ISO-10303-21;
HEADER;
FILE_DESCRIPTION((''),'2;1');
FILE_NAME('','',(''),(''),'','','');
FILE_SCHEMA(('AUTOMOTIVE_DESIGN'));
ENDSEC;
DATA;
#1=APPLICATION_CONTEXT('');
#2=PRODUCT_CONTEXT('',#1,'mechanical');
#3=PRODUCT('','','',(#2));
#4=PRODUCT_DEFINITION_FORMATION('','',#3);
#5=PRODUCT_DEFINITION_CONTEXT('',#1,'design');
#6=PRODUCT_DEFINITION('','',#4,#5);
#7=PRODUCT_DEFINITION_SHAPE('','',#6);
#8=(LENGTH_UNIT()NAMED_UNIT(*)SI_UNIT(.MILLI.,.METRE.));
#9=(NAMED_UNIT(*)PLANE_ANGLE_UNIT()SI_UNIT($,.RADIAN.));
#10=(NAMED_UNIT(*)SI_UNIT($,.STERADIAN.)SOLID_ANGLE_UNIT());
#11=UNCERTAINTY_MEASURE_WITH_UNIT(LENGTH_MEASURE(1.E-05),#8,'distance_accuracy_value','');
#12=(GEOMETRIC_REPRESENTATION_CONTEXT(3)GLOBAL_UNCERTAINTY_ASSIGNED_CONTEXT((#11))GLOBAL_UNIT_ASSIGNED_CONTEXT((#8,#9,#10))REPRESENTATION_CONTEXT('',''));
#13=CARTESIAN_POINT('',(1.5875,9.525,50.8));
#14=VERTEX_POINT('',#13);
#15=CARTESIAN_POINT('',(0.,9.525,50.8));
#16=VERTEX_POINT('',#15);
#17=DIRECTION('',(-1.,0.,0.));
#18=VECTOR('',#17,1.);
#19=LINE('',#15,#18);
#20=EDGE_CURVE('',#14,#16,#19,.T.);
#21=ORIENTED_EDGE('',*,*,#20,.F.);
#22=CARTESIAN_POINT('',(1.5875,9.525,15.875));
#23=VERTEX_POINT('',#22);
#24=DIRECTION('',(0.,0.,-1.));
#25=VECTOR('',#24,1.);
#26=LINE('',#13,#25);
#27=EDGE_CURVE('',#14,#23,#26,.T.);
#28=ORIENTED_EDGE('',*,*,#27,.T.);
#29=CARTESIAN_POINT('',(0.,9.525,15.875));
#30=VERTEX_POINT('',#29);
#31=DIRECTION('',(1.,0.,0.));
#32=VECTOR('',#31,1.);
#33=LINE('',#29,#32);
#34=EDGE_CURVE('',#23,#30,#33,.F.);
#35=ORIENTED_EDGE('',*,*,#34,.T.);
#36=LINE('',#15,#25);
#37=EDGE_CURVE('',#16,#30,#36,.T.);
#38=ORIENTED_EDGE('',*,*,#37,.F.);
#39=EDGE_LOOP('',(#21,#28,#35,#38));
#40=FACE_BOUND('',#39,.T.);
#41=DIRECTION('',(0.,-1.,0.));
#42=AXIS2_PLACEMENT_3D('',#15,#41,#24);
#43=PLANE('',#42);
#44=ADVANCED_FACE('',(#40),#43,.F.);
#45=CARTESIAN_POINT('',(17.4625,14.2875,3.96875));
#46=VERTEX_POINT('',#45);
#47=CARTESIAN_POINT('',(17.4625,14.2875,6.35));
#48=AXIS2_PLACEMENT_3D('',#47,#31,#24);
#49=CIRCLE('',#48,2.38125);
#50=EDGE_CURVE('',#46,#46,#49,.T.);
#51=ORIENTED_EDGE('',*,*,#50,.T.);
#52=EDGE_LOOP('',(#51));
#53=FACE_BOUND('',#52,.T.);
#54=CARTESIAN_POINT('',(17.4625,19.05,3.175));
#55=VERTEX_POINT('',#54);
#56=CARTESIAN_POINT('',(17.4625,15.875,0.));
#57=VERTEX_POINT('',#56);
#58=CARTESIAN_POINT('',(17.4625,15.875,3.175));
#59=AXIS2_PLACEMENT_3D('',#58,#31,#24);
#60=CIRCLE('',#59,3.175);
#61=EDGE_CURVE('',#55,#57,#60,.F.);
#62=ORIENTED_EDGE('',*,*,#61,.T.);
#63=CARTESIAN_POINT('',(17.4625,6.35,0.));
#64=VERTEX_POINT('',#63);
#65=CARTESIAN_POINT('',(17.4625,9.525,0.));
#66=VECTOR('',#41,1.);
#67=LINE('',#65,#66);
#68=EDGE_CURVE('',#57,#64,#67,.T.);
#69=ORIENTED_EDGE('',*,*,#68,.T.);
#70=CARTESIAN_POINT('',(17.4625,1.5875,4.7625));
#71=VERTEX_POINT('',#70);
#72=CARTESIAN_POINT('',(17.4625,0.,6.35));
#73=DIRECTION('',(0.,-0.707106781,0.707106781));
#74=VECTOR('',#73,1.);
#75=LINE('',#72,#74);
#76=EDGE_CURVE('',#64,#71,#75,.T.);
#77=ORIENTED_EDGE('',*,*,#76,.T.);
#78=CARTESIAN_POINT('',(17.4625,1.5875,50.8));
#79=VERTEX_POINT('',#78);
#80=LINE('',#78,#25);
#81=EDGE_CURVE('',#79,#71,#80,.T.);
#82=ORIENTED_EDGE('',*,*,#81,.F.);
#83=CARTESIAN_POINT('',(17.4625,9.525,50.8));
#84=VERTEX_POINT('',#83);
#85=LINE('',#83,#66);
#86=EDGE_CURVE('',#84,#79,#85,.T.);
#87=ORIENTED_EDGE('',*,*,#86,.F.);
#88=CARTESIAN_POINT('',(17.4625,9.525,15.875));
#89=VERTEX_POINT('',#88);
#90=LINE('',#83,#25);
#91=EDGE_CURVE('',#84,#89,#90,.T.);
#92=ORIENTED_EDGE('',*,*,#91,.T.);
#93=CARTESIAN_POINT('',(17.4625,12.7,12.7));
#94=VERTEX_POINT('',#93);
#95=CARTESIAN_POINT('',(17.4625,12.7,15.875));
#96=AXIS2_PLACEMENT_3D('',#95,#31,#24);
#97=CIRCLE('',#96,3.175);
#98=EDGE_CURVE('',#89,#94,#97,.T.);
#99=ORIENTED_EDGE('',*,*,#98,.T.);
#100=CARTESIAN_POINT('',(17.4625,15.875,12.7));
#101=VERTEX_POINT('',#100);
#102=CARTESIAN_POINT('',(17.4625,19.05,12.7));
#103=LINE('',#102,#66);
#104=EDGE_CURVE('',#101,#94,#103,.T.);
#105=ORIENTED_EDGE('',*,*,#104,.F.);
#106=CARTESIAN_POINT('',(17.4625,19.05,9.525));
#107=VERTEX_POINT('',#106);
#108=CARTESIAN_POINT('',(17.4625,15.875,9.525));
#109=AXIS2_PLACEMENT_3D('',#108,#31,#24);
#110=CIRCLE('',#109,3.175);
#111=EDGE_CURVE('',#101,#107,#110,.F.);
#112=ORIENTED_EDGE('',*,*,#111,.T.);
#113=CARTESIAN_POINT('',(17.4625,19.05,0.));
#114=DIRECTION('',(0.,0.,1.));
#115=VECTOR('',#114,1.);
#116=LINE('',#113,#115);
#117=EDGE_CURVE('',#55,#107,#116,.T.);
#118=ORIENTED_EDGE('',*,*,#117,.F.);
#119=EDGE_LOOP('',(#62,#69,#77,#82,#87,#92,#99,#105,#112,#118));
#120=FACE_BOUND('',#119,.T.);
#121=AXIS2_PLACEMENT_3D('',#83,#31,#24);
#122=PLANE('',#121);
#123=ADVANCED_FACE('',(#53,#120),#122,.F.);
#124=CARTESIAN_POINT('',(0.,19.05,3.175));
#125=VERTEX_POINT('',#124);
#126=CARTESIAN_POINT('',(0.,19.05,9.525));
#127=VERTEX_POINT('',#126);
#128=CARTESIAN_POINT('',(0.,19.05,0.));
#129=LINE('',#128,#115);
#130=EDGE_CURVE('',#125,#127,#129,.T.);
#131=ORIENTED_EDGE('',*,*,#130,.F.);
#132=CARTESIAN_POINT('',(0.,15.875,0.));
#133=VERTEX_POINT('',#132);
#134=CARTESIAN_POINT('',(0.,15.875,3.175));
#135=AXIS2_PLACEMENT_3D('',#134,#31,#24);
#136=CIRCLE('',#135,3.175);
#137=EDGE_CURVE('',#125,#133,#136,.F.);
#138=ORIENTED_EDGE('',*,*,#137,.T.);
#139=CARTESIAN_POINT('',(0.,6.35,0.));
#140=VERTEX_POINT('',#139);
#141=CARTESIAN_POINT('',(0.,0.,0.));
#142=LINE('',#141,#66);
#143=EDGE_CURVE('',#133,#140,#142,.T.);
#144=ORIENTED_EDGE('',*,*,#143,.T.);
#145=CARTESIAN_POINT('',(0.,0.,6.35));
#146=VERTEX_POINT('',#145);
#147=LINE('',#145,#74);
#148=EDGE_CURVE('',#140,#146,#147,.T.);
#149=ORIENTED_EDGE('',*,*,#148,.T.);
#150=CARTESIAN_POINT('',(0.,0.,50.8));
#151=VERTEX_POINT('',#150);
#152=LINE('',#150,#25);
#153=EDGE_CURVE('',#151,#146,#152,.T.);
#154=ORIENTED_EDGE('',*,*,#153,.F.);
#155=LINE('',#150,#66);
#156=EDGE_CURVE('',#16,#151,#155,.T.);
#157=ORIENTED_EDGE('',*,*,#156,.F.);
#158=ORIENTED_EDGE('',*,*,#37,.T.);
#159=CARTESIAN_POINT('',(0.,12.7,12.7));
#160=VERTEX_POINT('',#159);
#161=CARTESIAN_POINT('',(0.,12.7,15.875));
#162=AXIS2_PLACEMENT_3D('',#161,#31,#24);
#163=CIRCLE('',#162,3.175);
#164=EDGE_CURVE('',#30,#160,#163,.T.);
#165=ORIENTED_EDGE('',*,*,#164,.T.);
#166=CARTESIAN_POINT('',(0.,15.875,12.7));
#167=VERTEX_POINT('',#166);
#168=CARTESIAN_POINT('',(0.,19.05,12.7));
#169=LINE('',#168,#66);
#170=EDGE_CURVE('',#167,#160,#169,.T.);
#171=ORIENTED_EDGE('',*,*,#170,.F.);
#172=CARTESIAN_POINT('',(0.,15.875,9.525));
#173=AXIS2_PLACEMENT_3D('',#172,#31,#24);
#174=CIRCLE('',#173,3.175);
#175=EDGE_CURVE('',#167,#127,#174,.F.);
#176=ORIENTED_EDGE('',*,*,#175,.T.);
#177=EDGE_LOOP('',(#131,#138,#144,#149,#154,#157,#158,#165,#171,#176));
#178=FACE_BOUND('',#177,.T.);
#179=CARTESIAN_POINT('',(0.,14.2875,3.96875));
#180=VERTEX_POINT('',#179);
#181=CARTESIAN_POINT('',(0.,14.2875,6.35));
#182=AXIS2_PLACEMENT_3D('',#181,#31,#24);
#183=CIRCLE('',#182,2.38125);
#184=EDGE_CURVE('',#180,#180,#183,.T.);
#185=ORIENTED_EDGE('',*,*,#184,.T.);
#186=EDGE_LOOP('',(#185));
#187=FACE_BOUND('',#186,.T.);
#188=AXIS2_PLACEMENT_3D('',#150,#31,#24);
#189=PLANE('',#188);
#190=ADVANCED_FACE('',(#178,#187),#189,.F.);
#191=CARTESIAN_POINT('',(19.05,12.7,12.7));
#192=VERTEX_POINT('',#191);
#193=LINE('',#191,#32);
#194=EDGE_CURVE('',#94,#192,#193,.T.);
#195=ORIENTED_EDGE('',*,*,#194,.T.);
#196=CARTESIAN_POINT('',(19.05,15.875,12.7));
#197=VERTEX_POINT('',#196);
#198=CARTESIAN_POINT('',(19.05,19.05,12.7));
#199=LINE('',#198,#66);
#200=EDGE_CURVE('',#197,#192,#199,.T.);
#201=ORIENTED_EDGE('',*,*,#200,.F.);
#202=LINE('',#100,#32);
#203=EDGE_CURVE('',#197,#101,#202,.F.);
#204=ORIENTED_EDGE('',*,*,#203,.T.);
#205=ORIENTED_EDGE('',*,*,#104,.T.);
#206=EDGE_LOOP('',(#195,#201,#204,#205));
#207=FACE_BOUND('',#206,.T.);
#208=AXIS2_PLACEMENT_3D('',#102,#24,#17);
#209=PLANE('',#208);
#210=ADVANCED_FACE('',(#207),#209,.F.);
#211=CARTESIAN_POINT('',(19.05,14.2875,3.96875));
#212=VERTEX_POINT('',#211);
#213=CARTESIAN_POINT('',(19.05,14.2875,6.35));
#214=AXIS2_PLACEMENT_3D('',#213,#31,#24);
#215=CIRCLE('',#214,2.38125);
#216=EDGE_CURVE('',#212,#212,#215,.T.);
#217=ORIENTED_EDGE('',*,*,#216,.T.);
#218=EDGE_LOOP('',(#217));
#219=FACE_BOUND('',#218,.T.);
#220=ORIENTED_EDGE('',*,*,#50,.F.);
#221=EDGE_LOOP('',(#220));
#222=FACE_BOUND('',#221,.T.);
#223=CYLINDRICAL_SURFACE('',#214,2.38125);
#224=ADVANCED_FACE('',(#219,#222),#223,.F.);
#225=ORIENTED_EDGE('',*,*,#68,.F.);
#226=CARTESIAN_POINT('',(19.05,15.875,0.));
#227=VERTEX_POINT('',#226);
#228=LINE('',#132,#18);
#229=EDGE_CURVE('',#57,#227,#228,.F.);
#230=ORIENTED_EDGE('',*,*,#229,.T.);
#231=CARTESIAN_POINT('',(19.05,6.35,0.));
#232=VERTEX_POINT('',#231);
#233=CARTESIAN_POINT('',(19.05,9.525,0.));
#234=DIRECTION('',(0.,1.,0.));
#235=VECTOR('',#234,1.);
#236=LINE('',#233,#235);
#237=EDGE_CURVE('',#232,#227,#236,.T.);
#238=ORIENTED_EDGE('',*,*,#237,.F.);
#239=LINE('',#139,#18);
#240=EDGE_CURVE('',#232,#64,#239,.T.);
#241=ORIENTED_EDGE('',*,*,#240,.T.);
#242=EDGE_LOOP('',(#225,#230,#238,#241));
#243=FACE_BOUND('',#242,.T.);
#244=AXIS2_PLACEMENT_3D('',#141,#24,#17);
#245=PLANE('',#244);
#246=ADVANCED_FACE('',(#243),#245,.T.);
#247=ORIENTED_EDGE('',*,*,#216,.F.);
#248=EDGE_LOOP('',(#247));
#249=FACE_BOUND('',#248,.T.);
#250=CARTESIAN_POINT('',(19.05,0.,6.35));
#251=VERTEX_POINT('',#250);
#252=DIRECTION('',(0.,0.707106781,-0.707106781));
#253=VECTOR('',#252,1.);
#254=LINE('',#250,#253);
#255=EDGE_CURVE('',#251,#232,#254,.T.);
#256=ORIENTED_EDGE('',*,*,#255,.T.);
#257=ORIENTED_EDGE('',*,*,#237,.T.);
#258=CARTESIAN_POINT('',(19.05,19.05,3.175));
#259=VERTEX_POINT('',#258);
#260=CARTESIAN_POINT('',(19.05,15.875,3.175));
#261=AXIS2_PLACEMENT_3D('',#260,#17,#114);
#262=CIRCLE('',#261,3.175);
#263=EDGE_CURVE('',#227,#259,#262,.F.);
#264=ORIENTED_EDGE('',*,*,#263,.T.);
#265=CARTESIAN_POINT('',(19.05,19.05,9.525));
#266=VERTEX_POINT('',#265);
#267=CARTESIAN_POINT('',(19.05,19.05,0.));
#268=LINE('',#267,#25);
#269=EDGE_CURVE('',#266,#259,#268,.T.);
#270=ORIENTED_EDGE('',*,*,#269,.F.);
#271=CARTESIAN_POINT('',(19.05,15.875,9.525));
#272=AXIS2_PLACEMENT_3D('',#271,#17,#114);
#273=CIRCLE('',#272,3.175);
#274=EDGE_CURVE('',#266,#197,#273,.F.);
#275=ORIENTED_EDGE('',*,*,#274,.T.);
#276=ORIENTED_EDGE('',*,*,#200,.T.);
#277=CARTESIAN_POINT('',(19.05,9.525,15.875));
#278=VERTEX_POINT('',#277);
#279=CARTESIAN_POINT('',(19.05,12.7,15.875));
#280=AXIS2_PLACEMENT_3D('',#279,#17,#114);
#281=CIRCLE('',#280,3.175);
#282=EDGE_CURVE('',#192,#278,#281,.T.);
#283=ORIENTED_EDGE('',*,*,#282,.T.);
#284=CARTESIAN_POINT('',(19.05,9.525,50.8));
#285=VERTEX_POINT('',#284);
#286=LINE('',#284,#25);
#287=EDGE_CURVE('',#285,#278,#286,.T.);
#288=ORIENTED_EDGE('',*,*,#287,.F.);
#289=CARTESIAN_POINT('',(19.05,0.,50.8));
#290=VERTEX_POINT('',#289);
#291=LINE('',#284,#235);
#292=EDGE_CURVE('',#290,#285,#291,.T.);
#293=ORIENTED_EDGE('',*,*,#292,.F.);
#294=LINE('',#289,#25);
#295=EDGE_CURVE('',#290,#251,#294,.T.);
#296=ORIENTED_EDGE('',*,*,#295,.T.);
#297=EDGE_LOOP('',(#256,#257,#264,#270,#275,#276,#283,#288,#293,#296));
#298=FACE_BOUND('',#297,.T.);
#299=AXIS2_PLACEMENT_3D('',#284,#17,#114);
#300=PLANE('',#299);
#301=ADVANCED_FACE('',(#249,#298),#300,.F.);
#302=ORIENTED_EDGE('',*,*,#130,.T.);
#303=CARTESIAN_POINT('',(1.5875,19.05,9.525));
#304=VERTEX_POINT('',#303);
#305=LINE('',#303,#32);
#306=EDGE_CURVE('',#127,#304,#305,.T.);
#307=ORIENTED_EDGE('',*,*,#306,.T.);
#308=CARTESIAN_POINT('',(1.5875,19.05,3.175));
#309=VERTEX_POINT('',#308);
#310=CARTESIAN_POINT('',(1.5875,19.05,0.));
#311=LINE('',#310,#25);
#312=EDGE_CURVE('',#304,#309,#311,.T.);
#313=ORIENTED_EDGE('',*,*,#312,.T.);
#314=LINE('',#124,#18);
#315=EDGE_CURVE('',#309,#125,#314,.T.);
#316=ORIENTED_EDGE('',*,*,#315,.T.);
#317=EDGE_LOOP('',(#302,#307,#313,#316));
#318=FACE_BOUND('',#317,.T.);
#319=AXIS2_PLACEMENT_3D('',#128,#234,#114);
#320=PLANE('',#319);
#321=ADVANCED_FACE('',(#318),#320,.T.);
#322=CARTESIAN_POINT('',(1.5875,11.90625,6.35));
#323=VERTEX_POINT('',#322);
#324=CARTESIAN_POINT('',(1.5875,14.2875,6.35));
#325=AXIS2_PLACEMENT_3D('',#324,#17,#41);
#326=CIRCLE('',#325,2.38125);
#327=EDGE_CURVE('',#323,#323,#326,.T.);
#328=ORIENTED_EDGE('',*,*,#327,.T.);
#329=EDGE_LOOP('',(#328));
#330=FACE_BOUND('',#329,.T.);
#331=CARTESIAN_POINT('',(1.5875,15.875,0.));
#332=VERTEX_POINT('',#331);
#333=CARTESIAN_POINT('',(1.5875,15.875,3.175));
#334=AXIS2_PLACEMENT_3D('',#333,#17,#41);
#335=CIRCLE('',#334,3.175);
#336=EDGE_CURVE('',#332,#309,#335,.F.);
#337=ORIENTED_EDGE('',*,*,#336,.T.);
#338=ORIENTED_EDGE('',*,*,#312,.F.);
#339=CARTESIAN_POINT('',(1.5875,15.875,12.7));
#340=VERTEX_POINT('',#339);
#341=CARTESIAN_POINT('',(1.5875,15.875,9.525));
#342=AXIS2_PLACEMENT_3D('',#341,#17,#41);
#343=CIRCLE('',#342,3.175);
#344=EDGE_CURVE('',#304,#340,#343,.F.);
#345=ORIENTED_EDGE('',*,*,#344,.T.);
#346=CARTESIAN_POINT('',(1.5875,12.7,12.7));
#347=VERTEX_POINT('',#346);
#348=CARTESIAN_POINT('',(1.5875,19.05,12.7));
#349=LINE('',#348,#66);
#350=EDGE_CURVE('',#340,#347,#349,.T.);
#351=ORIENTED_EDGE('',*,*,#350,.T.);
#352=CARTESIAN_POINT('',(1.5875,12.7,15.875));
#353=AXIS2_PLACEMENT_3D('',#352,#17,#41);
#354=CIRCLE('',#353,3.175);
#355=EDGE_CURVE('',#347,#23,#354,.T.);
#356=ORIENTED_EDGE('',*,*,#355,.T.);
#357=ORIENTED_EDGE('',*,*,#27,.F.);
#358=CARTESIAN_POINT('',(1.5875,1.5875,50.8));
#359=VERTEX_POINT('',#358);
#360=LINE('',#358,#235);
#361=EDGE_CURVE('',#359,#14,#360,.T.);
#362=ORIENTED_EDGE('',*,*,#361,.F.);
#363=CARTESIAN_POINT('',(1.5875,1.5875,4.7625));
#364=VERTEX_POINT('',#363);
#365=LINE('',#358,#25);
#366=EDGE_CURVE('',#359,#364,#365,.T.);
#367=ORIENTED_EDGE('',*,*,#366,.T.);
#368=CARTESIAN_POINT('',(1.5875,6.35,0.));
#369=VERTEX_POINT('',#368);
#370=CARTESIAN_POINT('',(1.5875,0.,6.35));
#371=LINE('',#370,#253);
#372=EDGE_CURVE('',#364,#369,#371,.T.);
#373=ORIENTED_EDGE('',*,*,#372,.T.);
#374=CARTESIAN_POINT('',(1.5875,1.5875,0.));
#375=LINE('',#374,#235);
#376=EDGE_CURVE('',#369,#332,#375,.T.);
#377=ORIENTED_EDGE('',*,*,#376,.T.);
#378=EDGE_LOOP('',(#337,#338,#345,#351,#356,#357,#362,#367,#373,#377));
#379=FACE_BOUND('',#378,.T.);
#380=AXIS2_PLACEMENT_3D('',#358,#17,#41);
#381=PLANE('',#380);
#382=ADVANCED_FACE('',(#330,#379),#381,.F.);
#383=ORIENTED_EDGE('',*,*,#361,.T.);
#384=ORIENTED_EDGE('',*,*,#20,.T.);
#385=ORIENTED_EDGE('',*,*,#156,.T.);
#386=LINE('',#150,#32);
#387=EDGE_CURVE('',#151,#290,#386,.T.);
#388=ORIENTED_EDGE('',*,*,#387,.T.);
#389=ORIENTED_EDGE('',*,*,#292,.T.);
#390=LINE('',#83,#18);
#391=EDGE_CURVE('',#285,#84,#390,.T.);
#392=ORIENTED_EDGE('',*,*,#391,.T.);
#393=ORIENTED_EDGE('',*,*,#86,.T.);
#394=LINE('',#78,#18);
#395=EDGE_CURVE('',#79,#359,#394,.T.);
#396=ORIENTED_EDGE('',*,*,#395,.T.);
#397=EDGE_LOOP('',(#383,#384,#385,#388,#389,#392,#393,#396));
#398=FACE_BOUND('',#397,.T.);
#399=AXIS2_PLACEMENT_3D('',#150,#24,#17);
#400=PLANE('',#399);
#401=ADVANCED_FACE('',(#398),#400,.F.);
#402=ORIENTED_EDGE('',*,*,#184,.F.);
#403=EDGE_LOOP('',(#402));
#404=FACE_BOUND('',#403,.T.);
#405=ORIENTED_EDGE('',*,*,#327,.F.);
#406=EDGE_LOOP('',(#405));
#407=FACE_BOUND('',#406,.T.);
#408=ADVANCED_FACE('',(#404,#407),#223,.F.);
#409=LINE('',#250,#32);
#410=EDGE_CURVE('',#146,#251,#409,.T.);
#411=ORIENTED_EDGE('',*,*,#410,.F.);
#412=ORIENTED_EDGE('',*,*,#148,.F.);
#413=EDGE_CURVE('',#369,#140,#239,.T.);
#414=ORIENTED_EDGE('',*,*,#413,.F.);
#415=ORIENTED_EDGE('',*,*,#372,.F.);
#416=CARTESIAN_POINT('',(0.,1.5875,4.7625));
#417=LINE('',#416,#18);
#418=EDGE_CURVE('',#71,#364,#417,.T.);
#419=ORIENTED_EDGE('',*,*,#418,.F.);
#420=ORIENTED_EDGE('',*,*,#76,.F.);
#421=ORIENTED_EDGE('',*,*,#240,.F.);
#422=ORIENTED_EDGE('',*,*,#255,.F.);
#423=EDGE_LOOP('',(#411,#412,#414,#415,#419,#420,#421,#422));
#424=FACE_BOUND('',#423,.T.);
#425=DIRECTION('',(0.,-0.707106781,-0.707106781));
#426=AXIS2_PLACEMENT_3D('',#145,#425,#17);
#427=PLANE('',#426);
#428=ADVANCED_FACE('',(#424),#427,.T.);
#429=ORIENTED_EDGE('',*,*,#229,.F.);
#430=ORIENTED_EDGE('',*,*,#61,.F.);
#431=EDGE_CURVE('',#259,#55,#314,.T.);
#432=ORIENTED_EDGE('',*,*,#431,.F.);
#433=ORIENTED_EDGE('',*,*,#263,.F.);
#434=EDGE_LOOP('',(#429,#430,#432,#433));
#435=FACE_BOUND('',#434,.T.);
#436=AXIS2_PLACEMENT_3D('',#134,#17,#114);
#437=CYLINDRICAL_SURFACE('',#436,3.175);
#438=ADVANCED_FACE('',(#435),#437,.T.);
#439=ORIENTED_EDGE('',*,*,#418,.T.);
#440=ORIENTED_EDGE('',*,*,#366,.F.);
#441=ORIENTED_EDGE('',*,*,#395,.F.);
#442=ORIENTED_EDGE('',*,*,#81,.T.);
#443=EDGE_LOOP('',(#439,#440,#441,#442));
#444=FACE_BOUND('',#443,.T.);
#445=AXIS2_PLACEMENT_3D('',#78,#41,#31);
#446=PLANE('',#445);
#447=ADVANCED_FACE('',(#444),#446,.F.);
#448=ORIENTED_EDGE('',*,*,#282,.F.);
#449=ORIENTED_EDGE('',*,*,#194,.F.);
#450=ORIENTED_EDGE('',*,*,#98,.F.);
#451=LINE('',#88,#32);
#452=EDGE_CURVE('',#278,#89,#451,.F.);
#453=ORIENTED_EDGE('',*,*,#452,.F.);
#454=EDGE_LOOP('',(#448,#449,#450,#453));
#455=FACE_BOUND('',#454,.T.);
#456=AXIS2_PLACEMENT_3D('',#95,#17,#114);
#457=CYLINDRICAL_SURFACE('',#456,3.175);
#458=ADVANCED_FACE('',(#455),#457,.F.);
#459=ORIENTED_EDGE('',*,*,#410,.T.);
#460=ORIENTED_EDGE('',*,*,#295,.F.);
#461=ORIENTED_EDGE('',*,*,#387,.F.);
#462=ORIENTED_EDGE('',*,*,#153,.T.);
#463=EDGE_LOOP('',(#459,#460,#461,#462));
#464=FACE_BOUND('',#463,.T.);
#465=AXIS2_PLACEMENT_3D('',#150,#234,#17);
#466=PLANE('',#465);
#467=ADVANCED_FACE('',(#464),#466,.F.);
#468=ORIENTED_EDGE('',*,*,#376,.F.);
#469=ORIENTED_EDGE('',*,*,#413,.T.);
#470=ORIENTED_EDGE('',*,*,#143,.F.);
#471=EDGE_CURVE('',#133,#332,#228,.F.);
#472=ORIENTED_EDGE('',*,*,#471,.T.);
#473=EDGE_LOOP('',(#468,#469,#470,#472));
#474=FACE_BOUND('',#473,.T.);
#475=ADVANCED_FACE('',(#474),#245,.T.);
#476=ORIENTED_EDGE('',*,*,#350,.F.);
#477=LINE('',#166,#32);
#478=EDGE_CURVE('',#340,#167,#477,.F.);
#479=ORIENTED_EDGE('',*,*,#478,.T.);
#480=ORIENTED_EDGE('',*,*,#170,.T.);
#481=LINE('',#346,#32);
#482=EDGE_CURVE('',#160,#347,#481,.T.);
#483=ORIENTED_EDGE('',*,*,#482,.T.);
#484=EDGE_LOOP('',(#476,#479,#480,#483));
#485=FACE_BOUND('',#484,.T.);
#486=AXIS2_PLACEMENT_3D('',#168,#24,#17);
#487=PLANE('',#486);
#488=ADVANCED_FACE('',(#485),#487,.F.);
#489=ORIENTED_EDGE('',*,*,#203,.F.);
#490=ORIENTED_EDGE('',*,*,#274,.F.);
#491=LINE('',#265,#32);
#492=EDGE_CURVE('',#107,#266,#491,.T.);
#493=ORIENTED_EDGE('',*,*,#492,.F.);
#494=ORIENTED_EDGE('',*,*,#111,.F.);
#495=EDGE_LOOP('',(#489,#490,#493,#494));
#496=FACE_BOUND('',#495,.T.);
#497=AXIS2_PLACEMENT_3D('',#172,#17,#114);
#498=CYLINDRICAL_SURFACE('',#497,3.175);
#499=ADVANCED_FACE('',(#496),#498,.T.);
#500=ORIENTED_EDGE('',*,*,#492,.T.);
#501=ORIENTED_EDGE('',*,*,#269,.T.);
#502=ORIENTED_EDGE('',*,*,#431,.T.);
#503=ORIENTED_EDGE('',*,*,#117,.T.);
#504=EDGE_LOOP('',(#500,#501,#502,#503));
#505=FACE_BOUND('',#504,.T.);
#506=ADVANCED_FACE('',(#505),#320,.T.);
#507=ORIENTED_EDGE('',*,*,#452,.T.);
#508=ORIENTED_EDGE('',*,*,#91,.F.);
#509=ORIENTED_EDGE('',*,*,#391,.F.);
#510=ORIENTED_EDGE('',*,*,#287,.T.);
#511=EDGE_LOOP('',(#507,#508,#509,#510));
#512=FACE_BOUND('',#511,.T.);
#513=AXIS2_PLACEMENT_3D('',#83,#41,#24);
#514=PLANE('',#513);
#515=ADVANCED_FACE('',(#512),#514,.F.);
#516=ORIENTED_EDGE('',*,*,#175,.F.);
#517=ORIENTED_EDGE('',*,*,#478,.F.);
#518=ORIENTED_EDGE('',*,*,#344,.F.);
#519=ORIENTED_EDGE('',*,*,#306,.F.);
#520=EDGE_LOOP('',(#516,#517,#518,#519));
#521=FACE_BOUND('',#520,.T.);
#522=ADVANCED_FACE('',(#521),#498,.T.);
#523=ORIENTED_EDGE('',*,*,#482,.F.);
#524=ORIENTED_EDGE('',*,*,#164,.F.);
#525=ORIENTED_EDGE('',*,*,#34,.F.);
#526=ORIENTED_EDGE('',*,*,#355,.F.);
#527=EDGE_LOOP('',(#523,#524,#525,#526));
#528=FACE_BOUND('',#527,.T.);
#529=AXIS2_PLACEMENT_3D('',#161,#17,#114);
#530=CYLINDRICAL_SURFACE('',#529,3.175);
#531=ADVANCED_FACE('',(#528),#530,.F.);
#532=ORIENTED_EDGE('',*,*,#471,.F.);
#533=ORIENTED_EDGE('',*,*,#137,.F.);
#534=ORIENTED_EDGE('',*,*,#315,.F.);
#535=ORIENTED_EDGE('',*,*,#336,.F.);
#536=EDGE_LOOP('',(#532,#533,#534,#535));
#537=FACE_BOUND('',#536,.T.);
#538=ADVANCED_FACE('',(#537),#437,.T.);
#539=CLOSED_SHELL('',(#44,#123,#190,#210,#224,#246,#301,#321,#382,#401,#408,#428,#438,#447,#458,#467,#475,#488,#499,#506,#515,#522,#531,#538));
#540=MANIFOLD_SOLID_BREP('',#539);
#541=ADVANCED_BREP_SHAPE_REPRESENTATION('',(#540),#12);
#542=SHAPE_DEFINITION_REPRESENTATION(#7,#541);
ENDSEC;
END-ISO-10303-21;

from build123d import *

# Parameters (mm, degrees)
BOSS_EXTRUDE1_DEPTH            = 50.8
SKETCH4_W                      = 1.5875
SKETCH4_H                      = 12.7
BOSS_EXTRUDE2_DEPTH            = 9.525
FILLET2_R                      = 3.175
F_3_16_0_1875_DIAMETER_HOLE1_D = 4.7625
CHAMFER1_SIZE                  = 6.35


with BuildPart() as part:
    # Sketch1 → Boss-Extrude1 (new body)
    with BuildSketch(Plane.XY):
        Polygon((17.4625, 9.525), (17.4625, 1.5875), (1.5875, 1.5875), (1.5875, 9.525), (0, 9.525), (0, 0), (19.05, 0), (19.05, 9.525), align=None)
    extrude(amount=BOSS_EXTRUDE1_DEPTH)

    # Sketch4 → Boss-Extrude2 (add)
    with BuildSketch(Plane(origin=(0, 9.525, 0), x_dir=(1, 0, 0), z_dir=(0, 1, 0))):
        with Locations((0.79375, -6.35)):
            Rectangle(SKETCH4_W, SKETCH4_H)
        with Locations((18.25625, -6.35)):
            Rectangle(SKETCH4_W, SKETCH4_H)
    extrude(amount=BOSS_EXTRUDE2_DEPTH)

    # Fillet2
    fillet2_edges = [part.edges().sort_by_distance(p)[0] for p in [
        (0.79375, 9.525, 12.7),
        (0.79375, 19.05, 12.7),
        (0.79375, 19.05, 0),
        (18.25625, 9.525, 12.7),
        (18.25625, 19.05, 12.7),
        (18.25625, 19.05, 0),
    ]]
    fillet(fillet2_edges, radius=FILLET2_R)

    # 3/16 (0.1875) Diameter Hole1 (through all)
    with Locations(Plane(origin=(19.05, 0, 0), x_dir=(0, 0, -1), z_dir=(1, 0, 0))):
        with Locations((-6.35, 14.2875), (4.115757827, 15.875)):
            Hole(F_3_16_0_1875_DIAMETER_HOLE1_D / 2)

    # Chamfer1
    # the kernel refuses this chamfer: 6.35 mm, written as the material it takes off along each edge
    with BuildSketch(Plane(origin=(-16.330186974, 0, 0), x_dir=(0, 0.9996219169112966, -0.02749587661058637), z_dir=(1, 0, 0))) as chamfer1_piece_1:
        Polygon((CHAMFER1_SIZE * 0.999621916911, CHAMFER1_SIZE * 0.0274958766106), (-CHAMFER1_SIZE * 0.0274958766106, CHAMFER1_SIZE * 0.999621916911), (0, 0), align=None)
    extrude(amount=51.710373947, mode=Mode.SUBTRACT)


solid = part.part
